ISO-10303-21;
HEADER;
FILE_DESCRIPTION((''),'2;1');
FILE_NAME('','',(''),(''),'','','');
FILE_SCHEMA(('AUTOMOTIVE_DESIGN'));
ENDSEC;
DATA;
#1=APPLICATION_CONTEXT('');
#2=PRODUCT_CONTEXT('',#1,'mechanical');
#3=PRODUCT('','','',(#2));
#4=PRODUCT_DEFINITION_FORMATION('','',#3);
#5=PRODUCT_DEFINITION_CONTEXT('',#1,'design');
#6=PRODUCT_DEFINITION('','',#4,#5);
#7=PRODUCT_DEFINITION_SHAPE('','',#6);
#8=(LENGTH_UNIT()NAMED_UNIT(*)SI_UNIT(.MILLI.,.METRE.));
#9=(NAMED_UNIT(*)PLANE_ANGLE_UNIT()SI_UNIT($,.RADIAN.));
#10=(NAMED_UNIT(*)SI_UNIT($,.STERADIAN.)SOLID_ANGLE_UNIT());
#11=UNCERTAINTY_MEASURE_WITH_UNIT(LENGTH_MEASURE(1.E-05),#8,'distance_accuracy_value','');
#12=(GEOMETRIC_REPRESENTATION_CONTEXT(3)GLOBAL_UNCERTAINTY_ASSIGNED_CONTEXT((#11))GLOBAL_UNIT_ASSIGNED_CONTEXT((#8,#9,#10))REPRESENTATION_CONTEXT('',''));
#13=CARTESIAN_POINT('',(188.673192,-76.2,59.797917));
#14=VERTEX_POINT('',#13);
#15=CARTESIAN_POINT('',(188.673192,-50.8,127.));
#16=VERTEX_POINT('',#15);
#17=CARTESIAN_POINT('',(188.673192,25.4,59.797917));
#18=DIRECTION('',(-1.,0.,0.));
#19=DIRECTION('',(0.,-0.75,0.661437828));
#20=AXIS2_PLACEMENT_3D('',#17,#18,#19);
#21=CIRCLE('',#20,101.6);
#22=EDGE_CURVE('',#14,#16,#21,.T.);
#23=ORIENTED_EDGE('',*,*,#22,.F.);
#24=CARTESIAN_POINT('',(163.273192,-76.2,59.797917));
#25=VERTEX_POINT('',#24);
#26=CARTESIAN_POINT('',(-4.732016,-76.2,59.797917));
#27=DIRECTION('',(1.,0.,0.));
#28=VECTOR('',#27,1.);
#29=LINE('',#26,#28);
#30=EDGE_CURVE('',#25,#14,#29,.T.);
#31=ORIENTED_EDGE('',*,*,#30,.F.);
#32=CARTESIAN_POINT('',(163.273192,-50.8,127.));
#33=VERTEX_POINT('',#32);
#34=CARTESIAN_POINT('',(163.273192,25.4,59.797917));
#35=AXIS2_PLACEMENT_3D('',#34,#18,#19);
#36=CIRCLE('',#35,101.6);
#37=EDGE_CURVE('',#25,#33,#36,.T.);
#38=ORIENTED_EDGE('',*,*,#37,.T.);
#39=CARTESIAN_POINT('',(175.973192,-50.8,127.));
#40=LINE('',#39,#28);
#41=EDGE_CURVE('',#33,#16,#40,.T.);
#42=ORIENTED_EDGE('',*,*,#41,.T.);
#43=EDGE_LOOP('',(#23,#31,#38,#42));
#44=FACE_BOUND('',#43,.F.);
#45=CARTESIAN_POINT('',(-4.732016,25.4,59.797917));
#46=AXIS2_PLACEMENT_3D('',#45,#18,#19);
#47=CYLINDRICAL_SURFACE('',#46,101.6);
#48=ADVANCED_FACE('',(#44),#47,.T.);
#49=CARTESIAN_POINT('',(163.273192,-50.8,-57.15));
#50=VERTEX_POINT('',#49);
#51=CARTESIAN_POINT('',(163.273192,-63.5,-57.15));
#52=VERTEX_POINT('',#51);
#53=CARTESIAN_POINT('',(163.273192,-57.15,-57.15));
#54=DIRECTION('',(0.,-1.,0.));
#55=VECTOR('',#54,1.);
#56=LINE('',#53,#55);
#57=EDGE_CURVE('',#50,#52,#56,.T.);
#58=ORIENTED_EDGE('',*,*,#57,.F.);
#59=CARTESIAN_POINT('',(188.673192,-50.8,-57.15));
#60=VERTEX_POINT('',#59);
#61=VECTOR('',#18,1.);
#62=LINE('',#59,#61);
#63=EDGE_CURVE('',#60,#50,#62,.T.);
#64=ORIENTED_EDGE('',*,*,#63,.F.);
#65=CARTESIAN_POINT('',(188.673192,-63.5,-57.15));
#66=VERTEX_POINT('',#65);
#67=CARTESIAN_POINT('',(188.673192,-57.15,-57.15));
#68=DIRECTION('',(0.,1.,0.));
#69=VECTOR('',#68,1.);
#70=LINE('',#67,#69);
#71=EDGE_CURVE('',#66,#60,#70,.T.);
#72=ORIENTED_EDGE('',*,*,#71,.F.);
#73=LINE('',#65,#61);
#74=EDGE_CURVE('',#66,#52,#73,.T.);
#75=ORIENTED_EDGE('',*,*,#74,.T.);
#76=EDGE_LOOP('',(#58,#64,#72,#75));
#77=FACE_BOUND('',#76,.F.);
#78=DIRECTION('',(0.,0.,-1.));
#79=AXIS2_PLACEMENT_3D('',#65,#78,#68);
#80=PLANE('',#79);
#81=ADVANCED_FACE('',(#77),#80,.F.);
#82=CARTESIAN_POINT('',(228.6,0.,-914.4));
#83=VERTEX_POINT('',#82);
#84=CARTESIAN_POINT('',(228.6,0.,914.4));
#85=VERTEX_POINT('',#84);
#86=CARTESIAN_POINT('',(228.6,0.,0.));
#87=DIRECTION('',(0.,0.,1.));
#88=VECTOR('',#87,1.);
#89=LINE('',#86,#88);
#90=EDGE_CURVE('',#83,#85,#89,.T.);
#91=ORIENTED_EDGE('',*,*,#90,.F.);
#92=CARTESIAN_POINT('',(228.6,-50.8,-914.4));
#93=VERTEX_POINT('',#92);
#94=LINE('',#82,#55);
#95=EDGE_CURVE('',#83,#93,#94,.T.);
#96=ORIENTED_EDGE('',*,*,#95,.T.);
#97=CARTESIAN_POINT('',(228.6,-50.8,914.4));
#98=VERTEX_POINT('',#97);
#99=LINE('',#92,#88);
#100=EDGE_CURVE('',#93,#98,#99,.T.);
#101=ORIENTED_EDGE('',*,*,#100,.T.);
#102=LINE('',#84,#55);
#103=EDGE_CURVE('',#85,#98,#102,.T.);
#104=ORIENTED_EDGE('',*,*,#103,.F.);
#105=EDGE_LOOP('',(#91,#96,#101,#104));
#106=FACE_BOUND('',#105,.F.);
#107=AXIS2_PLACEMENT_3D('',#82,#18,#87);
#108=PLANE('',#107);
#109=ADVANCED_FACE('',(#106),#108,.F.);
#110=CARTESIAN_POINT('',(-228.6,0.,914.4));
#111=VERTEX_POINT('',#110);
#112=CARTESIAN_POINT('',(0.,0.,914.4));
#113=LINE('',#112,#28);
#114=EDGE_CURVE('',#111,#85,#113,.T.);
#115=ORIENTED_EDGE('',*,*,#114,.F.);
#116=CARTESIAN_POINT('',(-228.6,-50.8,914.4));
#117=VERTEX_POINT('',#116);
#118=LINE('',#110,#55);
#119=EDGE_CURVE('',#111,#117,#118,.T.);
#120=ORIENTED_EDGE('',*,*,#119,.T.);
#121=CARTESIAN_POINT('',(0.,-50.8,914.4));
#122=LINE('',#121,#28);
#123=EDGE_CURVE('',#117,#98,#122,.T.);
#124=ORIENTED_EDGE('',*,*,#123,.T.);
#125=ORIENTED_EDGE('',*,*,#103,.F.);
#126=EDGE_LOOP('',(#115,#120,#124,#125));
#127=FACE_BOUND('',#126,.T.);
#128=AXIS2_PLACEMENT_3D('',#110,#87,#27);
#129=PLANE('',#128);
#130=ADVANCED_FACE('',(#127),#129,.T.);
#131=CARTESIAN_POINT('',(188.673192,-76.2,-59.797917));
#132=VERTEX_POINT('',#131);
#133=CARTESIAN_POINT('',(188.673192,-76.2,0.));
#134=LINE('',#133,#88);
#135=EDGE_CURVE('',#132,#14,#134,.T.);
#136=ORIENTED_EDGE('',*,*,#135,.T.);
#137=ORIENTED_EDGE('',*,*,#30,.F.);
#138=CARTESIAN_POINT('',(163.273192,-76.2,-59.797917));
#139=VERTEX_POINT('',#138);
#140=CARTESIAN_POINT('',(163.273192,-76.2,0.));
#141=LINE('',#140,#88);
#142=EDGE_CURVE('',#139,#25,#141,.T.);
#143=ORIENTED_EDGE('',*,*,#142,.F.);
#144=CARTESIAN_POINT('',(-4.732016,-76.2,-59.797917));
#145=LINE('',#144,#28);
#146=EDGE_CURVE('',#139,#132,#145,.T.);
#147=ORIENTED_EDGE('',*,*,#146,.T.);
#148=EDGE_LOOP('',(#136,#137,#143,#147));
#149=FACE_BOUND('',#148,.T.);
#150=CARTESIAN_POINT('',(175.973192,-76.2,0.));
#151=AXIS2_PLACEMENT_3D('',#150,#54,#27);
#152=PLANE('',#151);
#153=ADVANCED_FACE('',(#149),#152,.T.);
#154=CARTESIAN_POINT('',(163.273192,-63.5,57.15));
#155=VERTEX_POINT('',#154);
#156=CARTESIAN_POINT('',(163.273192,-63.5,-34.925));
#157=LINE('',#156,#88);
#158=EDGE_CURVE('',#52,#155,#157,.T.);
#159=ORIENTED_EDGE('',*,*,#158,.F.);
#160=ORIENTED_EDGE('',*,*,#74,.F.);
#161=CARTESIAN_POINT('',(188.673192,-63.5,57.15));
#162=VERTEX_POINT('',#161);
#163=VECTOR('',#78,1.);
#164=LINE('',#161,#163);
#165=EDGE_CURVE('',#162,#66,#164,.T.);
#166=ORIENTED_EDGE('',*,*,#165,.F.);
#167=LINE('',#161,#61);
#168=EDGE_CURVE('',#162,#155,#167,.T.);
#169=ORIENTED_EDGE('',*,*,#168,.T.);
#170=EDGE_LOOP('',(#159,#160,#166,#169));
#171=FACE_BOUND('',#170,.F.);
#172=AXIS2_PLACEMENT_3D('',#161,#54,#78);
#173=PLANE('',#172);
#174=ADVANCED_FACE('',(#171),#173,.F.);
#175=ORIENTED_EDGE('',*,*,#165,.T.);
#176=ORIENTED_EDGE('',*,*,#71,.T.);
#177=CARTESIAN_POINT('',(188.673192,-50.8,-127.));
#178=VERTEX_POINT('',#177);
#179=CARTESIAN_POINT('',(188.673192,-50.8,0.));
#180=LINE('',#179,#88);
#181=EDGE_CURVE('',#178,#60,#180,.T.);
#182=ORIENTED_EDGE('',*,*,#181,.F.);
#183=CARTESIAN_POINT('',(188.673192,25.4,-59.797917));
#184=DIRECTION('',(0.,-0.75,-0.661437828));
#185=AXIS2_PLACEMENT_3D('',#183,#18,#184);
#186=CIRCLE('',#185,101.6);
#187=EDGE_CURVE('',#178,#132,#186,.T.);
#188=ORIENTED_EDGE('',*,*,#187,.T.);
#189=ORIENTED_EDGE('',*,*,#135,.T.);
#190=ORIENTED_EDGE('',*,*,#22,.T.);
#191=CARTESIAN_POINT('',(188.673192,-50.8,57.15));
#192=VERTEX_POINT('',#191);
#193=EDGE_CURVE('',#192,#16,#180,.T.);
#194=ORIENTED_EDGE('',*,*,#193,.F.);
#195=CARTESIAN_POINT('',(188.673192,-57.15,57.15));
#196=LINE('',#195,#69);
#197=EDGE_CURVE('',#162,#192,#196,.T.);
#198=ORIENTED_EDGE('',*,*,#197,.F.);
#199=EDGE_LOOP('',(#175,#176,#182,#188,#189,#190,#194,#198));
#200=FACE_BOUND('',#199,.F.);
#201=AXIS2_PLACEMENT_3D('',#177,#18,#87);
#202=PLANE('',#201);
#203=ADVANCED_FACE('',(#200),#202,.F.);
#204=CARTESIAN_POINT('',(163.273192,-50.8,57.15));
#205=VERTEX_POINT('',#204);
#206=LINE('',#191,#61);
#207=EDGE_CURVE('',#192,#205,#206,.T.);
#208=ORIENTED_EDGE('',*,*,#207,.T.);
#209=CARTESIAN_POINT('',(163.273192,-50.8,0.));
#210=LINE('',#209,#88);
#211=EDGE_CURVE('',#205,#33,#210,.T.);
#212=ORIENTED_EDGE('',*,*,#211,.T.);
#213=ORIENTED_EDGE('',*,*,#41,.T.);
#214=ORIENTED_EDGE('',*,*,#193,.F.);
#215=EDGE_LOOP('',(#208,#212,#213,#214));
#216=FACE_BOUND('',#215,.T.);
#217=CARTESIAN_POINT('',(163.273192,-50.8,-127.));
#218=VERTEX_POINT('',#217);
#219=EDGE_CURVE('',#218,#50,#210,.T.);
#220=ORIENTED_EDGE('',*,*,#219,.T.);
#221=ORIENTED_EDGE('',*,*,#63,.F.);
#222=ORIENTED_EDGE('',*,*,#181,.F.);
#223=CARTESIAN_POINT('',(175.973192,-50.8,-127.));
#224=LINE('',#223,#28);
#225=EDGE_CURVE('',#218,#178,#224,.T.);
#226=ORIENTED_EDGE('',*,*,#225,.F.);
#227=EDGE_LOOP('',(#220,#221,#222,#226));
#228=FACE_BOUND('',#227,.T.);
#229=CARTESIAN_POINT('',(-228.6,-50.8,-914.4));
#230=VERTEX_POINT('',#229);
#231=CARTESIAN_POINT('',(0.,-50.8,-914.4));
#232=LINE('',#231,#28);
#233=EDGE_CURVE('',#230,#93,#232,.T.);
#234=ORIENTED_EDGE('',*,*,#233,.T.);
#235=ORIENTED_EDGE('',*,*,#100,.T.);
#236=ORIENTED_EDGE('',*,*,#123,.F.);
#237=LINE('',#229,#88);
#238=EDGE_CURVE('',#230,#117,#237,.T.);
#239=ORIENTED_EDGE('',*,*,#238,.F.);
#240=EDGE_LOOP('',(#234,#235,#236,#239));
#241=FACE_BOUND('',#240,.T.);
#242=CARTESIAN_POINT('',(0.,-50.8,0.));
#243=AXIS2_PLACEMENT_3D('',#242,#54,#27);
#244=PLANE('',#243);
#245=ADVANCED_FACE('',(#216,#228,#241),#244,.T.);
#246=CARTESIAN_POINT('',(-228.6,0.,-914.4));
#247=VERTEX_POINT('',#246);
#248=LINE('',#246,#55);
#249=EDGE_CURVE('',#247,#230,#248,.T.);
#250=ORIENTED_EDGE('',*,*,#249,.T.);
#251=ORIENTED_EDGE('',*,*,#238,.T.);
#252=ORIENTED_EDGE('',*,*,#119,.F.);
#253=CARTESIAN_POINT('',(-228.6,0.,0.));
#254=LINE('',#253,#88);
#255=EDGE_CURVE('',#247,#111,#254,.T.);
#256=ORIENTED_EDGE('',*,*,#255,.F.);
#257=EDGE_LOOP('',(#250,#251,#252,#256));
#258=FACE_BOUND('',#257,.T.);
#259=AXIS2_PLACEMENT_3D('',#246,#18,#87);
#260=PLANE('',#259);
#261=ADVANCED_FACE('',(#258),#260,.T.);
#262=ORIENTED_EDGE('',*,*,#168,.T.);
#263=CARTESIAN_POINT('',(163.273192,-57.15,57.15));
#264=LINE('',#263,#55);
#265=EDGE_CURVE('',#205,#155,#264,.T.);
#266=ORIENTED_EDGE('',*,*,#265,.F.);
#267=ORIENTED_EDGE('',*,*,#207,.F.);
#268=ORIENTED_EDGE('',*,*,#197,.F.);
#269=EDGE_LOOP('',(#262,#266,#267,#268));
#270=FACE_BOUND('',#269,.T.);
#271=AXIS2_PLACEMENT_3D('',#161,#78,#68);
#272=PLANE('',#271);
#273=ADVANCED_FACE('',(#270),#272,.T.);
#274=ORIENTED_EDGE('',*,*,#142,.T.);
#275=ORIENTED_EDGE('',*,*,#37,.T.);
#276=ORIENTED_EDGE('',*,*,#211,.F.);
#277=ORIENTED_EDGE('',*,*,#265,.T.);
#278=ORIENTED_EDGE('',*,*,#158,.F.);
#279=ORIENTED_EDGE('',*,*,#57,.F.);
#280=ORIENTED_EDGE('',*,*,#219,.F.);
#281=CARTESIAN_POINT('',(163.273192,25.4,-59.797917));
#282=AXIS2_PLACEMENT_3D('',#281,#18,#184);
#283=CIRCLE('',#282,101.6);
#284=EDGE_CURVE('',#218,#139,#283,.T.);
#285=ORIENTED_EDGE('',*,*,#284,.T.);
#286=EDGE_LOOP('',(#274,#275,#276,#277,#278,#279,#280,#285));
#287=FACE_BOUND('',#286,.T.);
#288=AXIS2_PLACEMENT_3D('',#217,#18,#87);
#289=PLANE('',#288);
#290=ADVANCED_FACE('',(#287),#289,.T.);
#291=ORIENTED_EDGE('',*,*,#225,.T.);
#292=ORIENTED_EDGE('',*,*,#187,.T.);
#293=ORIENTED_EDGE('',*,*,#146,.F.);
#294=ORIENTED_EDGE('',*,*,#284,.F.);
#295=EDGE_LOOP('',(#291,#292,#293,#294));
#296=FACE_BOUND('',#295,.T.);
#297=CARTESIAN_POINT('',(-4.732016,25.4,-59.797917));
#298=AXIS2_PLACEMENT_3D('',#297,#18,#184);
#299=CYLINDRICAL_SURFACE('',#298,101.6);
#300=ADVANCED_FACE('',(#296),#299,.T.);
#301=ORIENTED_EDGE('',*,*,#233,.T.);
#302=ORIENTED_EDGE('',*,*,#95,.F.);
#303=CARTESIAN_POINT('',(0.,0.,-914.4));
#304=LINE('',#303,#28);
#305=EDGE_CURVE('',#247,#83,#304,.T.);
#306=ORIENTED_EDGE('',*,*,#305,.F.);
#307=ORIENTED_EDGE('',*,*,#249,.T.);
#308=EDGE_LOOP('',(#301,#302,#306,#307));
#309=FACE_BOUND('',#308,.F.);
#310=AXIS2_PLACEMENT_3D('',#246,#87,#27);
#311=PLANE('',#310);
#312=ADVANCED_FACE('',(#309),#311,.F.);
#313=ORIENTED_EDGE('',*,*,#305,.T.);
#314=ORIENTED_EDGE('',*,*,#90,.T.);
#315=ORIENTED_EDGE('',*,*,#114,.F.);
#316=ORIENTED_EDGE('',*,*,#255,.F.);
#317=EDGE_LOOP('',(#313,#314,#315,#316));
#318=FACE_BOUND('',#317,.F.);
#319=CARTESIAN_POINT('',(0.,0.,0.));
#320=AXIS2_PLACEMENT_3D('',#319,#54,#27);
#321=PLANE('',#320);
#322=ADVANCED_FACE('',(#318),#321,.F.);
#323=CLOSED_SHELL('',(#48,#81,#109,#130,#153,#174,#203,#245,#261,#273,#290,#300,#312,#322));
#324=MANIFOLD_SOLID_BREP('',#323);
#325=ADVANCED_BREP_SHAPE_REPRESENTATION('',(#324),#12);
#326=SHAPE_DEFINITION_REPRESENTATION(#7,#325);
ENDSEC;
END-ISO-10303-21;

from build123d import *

# Parameters (mm, degrees)
F0_W        = 457.2
F0_H        = 1828.8
F1_DEPTH    = 50.8
F2_W        = 25.4
F2_H        = 254
F3_DEPTH    = 25.4
F4_T1_DEPTH = 361.4104165052
F5_W        = 12.7
F5_H        = 57.15
F6_DEPTH    = 417.2741922717


# Not quite as in the source:
# - a fillet or chamfer that OpenCascade refuses, or shapes differently, is made with other operations: its cross-section is extruded or revolved along the edge and cut away or added


with BuildPart() as f1:
    # F0 (on Front) → F1 (new body)
    with BuildSketch(Plane.XZ):
        Rectangle(F0_W, F0_H)
    extrude(amount=F1_DEPTH)

    # F2 (on face) → F3 (join)
    with BuildSketch(Plane.XZ.offset(50.8)):
        with Locations((175.9731922717, 0)):
            Rectangle(F2_W, F2_H)
    extrude(amount=F3_DEPTH)

    # F4: fillet of radius 101.6 on 2 edges, made by hand

    # F4_s2 → F4_t1 (cut)
    with BuildSketch(Plane.YZ.offset(-4.7320159809)):
        with BuildLine():
            ThreePointArc((-50.8, 127), (-69.6380976241, 95.7189411832), (-76.2, 59.797916699))
            Line((-76.2, 59.797916699), (-76.2, 127))
            Line((-76.2, 127), (-50.8, 127))
        make_face()
        with BuildLine():
            ThreePointArc((-50.8, -127), (-69.6380976241, -95.7189411832), (-76.2, -59.797916699))
            Line((-76.2, -59.797916699), (-76.2, -127))
            Line((-76.2, -127), (-50.8, -127))
        make_face()
    extrude(amount=F4_T1_DEPTH, mode=Mode.SUBTRACT)

    # F5 (on face) → F6 (cut, through all)
    with BuildSketch(Plane.YZ.offset(188.6731922717)):
        with Locations((-57.15, -28.575)):
            Rectangle(F5_W, F5_H)
        with Locations((-57.15, 28.575)):
            Rectangle(F5_W, F5_H)
    extrude(amount=-F6_DEPTH, mode=Mode.SUBTRACT)


solid = f1.part
